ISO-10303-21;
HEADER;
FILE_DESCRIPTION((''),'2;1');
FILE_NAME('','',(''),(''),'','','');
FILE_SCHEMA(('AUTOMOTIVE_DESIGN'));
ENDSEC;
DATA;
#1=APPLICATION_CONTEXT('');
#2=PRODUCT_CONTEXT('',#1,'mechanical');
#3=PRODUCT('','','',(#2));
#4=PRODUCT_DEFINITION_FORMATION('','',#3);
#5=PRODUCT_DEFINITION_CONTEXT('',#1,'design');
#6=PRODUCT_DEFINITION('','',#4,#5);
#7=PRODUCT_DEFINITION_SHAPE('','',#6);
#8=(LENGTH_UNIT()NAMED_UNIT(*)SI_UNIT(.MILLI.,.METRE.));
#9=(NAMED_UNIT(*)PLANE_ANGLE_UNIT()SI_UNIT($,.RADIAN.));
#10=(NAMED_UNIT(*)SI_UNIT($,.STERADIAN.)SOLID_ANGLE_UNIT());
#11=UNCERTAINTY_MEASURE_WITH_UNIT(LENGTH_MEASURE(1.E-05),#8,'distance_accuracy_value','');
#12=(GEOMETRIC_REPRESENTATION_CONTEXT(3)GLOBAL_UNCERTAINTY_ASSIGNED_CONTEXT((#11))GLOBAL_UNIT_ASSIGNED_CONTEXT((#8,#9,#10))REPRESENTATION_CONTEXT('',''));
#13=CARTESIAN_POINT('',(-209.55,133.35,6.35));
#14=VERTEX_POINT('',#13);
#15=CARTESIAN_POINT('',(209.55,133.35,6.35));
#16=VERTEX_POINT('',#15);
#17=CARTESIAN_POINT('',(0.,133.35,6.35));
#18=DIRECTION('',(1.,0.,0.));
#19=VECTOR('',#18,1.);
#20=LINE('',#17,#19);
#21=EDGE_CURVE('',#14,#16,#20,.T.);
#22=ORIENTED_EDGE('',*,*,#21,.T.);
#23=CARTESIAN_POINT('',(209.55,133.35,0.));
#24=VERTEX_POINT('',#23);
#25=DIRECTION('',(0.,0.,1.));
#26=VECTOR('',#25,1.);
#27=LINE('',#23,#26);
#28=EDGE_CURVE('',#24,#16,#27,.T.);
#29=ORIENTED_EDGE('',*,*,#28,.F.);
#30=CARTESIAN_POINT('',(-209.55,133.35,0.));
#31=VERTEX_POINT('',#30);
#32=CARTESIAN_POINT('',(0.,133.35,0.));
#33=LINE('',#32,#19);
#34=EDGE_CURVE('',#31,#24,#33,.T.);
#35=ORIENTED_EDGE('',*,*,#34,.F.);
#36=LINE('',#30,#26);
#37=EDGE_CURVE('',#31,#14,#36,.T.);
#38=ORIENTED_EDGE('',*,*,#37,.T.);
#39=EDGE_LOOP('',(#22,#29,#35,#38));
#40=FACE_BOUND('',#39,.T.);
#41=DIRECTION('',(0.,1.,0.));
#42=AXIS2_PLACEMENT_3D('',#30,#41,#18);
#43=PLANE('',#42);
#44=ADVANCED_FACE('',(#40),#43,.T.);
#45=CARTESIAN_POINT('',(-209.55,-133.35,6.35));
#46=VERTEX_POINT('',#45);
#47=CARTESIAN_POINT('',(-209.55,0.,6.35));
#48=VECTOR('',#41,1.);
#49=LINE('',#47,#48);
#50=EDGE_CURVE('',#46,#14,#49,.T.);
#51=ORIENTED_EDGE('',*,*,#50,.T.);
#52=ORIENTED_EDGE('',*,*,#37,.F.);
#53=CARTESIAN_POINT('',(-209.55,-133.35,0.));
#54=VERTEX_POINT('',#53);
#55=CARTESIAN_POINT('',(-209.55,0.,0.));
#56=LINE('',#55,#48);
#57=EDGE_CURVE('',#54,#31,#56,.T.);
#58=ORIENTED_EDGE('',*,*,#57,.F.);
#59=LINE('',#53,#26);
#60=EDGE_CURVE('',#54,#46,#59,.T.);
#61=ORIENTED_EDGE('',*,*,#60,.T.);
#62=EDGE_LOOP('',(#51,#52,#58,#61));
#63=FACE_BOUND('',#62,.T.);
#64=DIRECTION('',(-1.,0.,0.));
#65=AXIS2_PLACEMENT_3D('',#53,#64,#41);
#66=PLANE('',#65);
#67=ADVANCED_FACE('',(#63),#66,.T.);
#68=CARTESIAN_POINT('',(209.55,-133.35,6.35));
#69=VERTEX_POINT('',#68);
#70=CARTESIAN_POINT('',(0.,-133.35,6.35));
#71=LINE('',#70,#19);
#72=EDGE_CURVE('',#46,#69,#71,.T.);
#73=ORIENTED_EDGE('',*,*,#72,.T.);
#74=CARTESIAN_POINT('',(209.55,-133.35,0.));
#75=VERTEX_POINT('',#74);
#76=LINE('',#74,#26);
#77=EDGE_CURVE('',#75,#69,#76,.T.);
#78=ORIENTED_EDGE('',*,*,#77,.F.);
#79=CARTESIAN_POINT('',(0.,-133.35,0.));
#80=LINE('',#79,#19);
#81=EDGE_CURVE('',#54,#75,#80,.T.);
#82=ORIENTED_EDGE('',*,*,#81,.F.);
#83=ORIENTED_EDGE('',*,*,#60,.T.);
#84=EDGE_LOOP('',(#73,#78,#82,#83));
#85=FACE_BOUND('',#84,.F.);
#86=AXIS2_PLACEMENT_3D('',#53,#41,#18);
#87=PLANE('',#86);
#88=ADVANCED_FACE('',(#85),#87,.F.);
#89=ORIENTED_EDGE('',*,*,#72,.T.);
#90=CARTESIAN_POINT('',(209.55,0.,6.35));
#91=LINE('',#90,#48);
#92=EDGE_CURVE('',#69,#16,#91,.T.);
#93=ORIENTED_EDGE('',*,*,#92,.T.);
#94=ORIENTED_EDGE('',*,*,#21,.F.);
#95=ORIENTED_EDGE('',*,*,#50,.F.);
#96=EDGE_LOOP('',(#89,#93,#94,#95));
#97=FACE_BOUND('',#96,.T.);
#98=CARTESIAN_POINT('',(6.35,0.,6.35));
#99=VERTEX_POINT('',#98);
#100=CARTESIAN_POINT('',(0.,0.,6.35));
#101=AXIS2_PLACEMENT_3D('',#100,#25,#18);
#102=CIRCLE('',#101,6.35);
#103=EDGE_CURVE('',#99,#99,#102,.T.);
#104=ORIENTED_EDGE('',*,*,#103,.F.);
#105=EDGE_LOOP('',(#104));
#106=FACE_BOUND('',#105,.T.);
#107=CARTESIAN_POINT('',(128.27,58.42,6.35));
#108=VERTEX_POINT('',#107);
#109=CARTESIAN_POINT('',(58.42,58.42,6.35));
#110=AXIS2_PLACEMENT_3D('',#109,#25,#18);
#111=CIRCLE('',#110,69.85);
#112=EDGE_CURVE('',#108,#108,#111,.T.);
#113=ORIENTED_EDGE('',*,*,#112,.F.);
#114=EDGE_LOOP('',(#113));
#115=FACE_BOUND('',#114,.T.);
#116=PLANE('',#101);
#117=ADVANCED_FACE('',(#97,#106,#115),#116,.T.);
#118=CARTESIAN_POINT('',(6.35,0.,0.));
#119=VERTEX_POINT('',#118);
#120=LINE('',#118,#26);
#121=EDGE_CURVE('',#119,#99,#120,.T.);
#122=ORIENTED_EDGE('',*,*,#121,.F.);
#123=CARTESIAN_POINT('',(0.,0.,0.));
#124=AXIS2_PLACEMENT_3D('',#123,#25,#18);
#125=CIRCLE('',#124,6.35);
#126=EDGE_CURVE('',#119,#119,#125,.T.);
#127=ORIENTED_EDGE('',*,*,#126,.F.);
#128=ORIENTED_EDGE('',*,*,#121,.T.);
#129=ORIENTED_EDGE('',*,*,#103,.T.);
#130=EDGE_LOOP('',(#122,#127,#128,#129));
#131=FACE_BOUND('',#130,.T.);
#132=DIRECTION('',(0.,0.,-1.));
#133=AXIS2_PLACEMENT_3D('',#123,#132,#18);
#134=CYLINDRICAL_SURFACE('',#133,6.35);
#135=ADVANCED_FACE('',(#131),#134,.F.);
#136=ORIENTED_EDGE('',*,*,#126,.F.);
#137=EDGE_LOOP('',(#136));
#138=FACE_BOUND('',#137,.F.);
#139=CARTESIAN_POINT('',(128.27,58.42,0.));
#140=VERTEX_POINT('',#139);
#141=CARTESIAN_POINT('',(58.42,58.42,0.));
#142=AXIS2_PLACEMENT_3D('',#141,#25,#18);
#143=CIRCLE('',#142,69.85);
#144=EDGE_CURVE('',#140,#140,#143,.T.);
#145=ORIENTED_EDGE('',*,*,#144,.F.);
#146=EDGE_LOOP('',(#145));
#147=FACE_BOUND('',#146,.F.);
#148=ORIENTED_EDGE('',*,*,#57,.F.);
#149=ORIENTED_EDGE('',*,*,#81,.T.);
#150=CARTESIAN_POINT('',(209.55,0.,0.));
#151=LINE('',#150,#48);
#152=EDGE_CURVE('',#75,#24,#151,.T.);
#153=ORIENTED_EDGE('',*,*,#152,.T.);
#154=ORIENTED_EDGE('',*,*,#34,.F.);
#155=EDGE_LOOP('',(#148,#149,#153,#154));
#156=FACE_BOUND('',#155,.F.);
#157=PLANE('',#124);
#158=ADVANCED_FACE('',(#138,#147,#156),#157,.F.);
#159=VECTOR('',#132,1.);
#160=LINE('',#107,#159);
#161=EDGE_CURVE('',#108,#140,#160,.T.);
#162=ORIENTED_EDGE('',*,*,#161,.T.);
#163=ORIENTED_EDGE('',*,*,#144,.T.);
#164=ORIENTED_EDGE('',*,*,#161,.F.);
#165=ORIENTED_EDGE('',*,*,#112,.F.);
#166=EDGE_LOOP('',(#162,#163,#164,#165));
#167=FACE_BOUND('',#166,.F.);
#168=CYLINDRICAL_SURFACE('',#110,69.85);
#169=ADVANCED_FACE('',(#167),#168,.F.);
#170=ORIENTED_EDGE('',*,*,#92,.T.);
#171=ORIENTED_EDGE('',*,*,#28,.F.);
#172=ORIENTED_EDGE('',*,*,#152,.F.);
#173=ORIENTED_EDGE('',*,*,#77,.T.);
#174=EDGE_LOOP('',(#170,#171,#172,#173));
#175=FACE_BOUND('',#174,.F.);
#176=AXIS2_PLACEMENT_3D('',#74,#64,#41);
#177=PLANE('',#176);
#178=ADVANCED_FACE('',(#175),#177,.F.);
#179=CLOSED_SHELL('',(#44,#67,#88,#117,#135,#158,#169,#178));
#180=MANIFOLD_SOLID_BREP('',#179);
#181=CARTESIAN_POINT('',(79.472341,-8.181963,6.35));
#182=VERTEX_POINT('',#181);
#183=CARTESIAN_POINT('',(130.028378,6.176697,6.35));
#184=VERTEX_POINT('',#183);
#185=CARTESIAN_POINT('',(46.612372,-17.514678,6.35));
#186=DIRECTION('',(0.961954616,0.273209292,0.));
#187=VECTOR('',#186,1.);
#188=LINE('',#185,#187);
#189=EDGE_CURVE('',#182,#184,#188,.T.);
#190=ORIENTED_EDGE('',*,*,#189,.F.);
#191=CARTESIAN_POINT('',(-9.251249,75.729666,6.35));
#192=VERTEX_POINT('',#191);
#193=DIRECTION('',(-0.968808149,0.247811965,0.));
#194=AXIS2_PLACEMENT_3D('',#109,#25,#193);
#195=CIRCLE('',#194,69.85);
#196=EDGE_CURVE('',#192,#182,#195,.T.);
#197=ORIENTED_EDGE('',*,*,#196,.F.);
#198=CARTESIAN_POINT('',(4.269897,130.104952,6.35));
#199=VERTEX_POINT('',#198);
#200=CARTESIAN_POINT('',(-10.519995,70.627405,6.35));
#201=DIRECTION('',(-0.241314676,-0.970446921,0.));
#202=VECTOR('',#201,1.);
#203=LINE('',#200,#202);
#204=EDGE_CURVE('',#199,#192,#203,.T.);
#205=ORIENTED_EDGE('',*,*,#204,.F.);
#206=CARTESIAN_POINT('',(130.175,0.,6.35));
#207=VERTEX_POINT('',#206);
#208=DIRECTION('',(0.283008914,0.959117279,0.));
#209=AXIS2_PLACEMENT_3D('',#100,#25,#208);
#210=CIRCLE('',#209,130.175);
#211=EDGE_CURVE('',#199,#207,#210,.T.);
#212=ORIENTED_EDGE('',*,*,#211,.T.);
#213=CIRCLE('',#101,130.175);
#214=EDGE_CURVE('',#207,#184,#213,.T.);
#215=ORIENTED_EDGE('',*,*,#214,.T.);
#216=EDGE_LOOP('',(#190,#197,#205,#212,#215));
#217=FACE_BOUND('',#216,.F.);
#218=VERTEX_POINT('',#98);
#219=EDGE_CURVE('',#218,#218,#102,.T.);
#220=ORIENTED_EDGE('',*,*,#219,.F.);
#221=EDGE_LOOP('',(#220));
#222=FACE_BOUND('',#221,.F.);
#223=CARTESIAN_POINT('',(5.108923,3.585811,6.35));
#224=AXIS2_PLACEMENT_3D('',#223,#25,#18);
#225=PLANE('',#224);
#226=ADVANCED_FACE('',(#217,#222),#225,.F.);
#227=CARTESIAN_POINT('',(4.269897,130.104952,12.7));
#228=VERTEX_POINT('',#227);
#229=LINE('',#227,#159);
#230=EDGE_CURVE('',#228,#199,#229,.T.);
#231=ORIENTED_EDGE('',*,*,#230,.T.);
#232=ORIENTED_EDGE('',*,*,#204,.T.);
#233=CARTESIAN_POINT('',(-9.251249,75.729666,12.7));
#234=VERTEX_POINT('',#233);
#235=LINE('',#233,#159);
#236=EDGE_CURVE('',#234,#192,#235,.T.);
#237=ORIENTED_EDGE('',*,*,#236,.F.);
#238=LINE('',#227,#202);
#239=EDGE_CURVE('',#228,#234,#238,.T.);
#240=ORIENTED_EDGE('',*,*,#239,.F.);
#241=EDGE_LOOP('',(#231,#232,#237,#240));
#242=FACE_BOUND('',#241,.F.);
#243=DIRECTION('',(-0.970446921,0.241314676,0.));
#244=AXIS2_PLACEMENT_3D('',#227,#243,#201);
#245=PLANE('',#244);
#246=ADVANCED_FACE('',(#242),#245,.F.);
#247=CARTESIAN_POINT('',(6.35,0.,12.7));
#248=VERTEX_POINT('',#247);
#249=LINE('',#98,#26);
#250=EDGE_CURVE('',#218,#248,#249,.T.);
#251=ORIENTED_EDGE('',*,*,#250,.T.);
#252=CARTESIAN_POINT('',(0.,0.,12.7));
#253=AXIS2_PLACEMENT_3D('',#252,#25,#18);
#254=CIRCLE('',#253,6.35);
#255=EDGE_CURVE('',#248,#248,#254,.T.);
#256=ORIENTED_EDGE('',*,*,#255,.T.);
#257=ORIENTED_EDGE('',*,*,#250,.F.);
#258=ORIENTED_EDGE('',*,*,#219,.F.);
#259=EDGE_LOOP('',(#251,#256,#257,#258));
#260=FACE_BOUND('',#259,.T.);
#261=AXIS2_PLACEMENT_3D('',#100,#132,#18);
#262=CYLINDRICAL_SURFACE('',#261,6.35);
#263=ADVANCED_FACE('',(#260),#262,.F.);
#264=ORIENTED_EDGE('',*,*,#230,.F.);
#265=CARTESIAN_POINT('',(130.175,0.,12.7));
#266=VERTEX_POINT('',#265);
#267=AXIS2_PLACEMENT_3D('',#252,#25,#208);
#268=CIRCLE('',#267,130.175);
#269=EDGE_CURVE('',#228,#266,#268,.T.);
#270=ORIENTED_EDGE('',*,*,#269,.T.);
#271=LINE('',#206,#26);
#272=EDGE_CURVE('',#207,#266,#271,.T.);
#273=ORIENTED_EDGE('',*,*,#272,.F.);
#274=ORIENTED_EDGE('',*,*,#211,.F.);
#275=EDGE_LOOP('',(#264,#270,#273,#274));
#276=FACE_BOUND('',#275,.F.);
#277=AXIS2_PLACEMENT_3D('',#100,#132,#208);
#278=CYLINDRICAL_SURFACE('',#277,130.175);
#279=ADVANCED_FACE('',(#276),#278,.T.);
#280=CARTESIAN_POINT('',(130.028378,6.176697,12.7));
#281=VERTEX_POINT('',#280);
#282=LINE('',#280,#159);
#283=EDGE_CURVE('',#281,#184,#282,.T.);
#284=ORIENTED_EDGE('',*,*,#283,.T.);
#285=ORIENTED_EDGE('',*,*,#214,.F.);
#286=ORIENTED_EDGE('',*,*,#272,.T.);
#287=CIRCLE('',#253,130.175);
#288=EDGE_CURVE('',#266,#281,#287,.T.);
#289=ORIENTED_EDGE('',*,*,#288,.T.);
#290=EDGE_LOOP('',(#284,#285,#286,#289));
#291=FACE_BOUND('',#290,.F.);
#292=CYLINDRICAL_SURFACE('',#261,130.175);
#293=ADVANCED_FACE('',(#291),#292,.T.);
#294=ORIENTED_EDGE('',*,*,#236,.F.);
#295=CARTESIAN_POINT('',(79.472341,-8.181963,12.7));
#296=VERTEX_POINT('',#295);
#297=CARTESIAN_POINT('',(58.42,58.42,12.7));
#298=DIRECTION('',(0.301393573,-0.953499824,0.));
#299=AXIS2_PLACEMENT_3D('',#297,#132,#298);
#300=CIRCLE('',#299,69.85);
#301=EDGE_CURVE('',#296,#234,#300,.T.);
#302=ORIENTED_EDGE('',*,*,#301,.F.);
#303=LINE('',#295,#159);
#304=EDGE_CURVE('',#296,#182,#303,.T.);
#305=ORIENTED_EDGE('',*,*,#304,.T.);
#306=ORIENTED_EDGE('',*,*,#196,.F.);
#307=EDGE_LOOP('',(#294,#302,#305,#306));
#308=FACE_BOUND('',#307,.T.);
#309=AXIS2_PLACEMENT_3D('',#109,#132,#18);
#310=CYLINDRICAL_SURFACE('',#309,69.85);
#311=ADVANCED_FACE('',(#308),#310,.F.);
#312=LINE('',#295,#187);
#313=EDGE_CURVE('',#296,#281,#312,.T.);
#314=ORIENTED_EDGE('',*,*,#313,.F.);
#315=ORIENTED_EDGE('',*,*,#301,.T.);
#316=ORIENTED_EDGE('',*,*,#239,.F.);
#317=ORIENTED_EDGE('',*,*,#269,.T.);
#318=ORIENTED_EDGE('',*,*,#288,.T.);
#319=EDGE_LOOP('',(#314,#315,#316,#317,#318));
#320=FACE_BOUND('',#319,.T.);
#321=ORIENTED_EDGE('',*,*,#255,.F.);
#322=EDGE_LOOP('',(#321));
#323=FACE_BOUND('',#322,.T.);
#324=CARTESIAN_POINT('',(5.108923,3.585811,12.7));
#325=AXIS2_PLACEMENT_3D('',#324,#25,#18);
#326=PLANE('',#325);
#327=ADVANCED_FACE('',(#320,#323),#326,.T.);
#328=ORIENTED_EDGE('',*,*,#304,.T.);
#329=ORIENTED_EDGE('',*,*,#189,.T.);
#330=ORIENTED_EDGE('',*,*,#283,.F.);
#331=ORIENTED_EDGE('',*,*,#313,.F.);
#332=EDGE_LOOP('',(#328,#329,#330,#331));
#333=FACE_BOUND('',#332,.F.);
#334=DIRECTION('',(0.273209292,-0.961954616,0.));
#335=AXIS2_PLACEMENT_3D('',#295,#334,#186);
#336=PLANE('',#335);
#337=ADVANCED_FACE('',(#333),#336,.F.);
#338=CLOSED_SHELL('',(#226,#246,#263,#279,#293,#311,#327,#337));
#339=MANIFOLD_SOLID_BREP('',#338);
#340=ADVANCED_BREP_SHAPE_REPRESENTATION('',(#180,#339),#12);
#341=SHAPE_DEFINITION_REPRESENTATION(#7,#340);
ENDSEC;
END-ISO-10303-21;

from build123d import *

# Parameters (mm, degrees)
F0_W     = 419.1
F0_H     = 266.7
F0_R     = 6.35
F1_DEPTH = 6.35
F2_R     = 69.85
F3_DEPTH = 6.35
F4_R     = 6.35
F5_DEPTH = 6.35
F6_DEPTH = 25.4
F8_DEPTH = 25.4


with BuildPart() as f1:
    # F0 (on Top) → F1 (new body)
    with BuildSketch(Plane.XY):
        Rectangle(F0_W, F0_H)
        Circle(F0_R, mode=Mode.SUBTRACT)
    extrude(amount=F1_DEPTH)

    # F2 (on face) → F3 (cut, through all)
    with BuildSketch(Plane.XY.offset(6.35)):
        with Locations((58.42, 58.42)):
            Circle(F2_R)
    extrude(amount=-F3_DEPTH, mode=Mode.SUBTRACT)


with BuildPart() as f5:
    # F4 (on face) → F5 (new body)
    with BuildSketch(Plane.XY.offset(6.35)):
        with BuildLine():
            ThreePointArc((36.8406854071, 124.8530917668), (-104.2623298413, -77.9416268823), (130.175, 0))
            ThreePointArc((130.175, 0), (128.8376533583, 18.6115475479), (124.8530917668, 36.8406854071))
            ThreePointArc((124.8530917668, 36.8406854071), (9.0285913341, 9.0285913341), (36.8406854071, 124.8530917668))
        make_face()
        Circle(F4_R, mode=Mode.SUBTRACT)
        with BuildLine():
            ThreePointArc((36.8406854071, 124.8530917668), (9.0285913341, 9.0285913341), (124.8530917668, 36.8406854071))
            ThreePointArc((124.8530917668, 36.8406854071), (92.047625241, 92.047625241), (36.8406854071, 124.8530917668))
        make_face()
    extrude(amount=F5_DEPTH)

    # F2 (on face) → F6 (cut)
    with BuildSketch(Plane.XY.offset(6.35)):
        with Locations((58.42, 58.42)):
            Circle(F2_R)
    extrude(amount=F6_DEPTH, mode=Mode.SUBTRACT)

    # F7 (on face) → F8 (cut)
    with BuildSketch(Plane.XY.offset(12.7)):
        with BuildLine():
            ThreePointArc((36.8406854071, 124.8530917668), (7.481865656, 106.2146541943), (-9.2512492182, 75.7296657751))
            Line((-9.2512492182, 75.7296657751), (36.8406854071, 65.8533647656))
            Line((36.8406854071, 65.8533647656), (49.260482192, 140.2665227652))
            Line((49.260482192, 140.2665227652), (4.2698969352, 130.1049522699))
            ThreePointArc((4.2698969352, 130.1049522699), (20.7223431305, 128.5150384982), (36.8406854071, 124.8530917668))
        make_face()
        with BuildLine():
            Line((4.2698969352, 130.1049522699), (-9.2512492182, 75.7296657751))
            ThreePointArc((-9.2512492182, 75.7296657751), (7.481865656, 106.2146541943), (36.8406854071, 124.8530917668))
            ThreePointArc((36.8406854071, 124.8530917668), (20.7223431305, 128.5150384982), (4.2698969352, 130.1049522699))
        make_face()
        with BuildLine():
            Line((127.2549563477, 54.1487200117), (75.5184735859, -9.3049193505))
            Line((75.5184735859, -9.3049193505), (79.4723410938, -8.1819626923))
            ThreePointArc((79.4723410938, -8.1819626923), (107.6153753027, 8.833332953), (124.8530917668, 36.8406854071))
            ThreePointArc((124.8530917668, 36.8406854071), (128.3596935609, 21.6637876178), (130.0283778221, 6.1766970102))
            Line((130.0283778221, 6.1766970103), (140.0697380304, 9.0285913341))
            Line((140.0697380304, 9.0285913341), (127.2549563477, 54.1487200117))
        make_face()
        with BuildLine():
            Line((79.4723410938, -8.1819626923), (130.0283778221, 6.1766970103))
            ThreePointArc((130.0283778221, 6.1766970102), (128.3596935609, 21.6637876178), (124.8530917668, 36.8406854071))
            ThreePointArc((124.8530917668, 36.8406854071), (107.6153753027, 8.833332953), (79.4723410938, -8.1819626923))
        make_face()
    extrude(amount=-F8_DEPTH, mode=Mode.SUBTRACT)


solid = Compound([f1.part, f5.part])
